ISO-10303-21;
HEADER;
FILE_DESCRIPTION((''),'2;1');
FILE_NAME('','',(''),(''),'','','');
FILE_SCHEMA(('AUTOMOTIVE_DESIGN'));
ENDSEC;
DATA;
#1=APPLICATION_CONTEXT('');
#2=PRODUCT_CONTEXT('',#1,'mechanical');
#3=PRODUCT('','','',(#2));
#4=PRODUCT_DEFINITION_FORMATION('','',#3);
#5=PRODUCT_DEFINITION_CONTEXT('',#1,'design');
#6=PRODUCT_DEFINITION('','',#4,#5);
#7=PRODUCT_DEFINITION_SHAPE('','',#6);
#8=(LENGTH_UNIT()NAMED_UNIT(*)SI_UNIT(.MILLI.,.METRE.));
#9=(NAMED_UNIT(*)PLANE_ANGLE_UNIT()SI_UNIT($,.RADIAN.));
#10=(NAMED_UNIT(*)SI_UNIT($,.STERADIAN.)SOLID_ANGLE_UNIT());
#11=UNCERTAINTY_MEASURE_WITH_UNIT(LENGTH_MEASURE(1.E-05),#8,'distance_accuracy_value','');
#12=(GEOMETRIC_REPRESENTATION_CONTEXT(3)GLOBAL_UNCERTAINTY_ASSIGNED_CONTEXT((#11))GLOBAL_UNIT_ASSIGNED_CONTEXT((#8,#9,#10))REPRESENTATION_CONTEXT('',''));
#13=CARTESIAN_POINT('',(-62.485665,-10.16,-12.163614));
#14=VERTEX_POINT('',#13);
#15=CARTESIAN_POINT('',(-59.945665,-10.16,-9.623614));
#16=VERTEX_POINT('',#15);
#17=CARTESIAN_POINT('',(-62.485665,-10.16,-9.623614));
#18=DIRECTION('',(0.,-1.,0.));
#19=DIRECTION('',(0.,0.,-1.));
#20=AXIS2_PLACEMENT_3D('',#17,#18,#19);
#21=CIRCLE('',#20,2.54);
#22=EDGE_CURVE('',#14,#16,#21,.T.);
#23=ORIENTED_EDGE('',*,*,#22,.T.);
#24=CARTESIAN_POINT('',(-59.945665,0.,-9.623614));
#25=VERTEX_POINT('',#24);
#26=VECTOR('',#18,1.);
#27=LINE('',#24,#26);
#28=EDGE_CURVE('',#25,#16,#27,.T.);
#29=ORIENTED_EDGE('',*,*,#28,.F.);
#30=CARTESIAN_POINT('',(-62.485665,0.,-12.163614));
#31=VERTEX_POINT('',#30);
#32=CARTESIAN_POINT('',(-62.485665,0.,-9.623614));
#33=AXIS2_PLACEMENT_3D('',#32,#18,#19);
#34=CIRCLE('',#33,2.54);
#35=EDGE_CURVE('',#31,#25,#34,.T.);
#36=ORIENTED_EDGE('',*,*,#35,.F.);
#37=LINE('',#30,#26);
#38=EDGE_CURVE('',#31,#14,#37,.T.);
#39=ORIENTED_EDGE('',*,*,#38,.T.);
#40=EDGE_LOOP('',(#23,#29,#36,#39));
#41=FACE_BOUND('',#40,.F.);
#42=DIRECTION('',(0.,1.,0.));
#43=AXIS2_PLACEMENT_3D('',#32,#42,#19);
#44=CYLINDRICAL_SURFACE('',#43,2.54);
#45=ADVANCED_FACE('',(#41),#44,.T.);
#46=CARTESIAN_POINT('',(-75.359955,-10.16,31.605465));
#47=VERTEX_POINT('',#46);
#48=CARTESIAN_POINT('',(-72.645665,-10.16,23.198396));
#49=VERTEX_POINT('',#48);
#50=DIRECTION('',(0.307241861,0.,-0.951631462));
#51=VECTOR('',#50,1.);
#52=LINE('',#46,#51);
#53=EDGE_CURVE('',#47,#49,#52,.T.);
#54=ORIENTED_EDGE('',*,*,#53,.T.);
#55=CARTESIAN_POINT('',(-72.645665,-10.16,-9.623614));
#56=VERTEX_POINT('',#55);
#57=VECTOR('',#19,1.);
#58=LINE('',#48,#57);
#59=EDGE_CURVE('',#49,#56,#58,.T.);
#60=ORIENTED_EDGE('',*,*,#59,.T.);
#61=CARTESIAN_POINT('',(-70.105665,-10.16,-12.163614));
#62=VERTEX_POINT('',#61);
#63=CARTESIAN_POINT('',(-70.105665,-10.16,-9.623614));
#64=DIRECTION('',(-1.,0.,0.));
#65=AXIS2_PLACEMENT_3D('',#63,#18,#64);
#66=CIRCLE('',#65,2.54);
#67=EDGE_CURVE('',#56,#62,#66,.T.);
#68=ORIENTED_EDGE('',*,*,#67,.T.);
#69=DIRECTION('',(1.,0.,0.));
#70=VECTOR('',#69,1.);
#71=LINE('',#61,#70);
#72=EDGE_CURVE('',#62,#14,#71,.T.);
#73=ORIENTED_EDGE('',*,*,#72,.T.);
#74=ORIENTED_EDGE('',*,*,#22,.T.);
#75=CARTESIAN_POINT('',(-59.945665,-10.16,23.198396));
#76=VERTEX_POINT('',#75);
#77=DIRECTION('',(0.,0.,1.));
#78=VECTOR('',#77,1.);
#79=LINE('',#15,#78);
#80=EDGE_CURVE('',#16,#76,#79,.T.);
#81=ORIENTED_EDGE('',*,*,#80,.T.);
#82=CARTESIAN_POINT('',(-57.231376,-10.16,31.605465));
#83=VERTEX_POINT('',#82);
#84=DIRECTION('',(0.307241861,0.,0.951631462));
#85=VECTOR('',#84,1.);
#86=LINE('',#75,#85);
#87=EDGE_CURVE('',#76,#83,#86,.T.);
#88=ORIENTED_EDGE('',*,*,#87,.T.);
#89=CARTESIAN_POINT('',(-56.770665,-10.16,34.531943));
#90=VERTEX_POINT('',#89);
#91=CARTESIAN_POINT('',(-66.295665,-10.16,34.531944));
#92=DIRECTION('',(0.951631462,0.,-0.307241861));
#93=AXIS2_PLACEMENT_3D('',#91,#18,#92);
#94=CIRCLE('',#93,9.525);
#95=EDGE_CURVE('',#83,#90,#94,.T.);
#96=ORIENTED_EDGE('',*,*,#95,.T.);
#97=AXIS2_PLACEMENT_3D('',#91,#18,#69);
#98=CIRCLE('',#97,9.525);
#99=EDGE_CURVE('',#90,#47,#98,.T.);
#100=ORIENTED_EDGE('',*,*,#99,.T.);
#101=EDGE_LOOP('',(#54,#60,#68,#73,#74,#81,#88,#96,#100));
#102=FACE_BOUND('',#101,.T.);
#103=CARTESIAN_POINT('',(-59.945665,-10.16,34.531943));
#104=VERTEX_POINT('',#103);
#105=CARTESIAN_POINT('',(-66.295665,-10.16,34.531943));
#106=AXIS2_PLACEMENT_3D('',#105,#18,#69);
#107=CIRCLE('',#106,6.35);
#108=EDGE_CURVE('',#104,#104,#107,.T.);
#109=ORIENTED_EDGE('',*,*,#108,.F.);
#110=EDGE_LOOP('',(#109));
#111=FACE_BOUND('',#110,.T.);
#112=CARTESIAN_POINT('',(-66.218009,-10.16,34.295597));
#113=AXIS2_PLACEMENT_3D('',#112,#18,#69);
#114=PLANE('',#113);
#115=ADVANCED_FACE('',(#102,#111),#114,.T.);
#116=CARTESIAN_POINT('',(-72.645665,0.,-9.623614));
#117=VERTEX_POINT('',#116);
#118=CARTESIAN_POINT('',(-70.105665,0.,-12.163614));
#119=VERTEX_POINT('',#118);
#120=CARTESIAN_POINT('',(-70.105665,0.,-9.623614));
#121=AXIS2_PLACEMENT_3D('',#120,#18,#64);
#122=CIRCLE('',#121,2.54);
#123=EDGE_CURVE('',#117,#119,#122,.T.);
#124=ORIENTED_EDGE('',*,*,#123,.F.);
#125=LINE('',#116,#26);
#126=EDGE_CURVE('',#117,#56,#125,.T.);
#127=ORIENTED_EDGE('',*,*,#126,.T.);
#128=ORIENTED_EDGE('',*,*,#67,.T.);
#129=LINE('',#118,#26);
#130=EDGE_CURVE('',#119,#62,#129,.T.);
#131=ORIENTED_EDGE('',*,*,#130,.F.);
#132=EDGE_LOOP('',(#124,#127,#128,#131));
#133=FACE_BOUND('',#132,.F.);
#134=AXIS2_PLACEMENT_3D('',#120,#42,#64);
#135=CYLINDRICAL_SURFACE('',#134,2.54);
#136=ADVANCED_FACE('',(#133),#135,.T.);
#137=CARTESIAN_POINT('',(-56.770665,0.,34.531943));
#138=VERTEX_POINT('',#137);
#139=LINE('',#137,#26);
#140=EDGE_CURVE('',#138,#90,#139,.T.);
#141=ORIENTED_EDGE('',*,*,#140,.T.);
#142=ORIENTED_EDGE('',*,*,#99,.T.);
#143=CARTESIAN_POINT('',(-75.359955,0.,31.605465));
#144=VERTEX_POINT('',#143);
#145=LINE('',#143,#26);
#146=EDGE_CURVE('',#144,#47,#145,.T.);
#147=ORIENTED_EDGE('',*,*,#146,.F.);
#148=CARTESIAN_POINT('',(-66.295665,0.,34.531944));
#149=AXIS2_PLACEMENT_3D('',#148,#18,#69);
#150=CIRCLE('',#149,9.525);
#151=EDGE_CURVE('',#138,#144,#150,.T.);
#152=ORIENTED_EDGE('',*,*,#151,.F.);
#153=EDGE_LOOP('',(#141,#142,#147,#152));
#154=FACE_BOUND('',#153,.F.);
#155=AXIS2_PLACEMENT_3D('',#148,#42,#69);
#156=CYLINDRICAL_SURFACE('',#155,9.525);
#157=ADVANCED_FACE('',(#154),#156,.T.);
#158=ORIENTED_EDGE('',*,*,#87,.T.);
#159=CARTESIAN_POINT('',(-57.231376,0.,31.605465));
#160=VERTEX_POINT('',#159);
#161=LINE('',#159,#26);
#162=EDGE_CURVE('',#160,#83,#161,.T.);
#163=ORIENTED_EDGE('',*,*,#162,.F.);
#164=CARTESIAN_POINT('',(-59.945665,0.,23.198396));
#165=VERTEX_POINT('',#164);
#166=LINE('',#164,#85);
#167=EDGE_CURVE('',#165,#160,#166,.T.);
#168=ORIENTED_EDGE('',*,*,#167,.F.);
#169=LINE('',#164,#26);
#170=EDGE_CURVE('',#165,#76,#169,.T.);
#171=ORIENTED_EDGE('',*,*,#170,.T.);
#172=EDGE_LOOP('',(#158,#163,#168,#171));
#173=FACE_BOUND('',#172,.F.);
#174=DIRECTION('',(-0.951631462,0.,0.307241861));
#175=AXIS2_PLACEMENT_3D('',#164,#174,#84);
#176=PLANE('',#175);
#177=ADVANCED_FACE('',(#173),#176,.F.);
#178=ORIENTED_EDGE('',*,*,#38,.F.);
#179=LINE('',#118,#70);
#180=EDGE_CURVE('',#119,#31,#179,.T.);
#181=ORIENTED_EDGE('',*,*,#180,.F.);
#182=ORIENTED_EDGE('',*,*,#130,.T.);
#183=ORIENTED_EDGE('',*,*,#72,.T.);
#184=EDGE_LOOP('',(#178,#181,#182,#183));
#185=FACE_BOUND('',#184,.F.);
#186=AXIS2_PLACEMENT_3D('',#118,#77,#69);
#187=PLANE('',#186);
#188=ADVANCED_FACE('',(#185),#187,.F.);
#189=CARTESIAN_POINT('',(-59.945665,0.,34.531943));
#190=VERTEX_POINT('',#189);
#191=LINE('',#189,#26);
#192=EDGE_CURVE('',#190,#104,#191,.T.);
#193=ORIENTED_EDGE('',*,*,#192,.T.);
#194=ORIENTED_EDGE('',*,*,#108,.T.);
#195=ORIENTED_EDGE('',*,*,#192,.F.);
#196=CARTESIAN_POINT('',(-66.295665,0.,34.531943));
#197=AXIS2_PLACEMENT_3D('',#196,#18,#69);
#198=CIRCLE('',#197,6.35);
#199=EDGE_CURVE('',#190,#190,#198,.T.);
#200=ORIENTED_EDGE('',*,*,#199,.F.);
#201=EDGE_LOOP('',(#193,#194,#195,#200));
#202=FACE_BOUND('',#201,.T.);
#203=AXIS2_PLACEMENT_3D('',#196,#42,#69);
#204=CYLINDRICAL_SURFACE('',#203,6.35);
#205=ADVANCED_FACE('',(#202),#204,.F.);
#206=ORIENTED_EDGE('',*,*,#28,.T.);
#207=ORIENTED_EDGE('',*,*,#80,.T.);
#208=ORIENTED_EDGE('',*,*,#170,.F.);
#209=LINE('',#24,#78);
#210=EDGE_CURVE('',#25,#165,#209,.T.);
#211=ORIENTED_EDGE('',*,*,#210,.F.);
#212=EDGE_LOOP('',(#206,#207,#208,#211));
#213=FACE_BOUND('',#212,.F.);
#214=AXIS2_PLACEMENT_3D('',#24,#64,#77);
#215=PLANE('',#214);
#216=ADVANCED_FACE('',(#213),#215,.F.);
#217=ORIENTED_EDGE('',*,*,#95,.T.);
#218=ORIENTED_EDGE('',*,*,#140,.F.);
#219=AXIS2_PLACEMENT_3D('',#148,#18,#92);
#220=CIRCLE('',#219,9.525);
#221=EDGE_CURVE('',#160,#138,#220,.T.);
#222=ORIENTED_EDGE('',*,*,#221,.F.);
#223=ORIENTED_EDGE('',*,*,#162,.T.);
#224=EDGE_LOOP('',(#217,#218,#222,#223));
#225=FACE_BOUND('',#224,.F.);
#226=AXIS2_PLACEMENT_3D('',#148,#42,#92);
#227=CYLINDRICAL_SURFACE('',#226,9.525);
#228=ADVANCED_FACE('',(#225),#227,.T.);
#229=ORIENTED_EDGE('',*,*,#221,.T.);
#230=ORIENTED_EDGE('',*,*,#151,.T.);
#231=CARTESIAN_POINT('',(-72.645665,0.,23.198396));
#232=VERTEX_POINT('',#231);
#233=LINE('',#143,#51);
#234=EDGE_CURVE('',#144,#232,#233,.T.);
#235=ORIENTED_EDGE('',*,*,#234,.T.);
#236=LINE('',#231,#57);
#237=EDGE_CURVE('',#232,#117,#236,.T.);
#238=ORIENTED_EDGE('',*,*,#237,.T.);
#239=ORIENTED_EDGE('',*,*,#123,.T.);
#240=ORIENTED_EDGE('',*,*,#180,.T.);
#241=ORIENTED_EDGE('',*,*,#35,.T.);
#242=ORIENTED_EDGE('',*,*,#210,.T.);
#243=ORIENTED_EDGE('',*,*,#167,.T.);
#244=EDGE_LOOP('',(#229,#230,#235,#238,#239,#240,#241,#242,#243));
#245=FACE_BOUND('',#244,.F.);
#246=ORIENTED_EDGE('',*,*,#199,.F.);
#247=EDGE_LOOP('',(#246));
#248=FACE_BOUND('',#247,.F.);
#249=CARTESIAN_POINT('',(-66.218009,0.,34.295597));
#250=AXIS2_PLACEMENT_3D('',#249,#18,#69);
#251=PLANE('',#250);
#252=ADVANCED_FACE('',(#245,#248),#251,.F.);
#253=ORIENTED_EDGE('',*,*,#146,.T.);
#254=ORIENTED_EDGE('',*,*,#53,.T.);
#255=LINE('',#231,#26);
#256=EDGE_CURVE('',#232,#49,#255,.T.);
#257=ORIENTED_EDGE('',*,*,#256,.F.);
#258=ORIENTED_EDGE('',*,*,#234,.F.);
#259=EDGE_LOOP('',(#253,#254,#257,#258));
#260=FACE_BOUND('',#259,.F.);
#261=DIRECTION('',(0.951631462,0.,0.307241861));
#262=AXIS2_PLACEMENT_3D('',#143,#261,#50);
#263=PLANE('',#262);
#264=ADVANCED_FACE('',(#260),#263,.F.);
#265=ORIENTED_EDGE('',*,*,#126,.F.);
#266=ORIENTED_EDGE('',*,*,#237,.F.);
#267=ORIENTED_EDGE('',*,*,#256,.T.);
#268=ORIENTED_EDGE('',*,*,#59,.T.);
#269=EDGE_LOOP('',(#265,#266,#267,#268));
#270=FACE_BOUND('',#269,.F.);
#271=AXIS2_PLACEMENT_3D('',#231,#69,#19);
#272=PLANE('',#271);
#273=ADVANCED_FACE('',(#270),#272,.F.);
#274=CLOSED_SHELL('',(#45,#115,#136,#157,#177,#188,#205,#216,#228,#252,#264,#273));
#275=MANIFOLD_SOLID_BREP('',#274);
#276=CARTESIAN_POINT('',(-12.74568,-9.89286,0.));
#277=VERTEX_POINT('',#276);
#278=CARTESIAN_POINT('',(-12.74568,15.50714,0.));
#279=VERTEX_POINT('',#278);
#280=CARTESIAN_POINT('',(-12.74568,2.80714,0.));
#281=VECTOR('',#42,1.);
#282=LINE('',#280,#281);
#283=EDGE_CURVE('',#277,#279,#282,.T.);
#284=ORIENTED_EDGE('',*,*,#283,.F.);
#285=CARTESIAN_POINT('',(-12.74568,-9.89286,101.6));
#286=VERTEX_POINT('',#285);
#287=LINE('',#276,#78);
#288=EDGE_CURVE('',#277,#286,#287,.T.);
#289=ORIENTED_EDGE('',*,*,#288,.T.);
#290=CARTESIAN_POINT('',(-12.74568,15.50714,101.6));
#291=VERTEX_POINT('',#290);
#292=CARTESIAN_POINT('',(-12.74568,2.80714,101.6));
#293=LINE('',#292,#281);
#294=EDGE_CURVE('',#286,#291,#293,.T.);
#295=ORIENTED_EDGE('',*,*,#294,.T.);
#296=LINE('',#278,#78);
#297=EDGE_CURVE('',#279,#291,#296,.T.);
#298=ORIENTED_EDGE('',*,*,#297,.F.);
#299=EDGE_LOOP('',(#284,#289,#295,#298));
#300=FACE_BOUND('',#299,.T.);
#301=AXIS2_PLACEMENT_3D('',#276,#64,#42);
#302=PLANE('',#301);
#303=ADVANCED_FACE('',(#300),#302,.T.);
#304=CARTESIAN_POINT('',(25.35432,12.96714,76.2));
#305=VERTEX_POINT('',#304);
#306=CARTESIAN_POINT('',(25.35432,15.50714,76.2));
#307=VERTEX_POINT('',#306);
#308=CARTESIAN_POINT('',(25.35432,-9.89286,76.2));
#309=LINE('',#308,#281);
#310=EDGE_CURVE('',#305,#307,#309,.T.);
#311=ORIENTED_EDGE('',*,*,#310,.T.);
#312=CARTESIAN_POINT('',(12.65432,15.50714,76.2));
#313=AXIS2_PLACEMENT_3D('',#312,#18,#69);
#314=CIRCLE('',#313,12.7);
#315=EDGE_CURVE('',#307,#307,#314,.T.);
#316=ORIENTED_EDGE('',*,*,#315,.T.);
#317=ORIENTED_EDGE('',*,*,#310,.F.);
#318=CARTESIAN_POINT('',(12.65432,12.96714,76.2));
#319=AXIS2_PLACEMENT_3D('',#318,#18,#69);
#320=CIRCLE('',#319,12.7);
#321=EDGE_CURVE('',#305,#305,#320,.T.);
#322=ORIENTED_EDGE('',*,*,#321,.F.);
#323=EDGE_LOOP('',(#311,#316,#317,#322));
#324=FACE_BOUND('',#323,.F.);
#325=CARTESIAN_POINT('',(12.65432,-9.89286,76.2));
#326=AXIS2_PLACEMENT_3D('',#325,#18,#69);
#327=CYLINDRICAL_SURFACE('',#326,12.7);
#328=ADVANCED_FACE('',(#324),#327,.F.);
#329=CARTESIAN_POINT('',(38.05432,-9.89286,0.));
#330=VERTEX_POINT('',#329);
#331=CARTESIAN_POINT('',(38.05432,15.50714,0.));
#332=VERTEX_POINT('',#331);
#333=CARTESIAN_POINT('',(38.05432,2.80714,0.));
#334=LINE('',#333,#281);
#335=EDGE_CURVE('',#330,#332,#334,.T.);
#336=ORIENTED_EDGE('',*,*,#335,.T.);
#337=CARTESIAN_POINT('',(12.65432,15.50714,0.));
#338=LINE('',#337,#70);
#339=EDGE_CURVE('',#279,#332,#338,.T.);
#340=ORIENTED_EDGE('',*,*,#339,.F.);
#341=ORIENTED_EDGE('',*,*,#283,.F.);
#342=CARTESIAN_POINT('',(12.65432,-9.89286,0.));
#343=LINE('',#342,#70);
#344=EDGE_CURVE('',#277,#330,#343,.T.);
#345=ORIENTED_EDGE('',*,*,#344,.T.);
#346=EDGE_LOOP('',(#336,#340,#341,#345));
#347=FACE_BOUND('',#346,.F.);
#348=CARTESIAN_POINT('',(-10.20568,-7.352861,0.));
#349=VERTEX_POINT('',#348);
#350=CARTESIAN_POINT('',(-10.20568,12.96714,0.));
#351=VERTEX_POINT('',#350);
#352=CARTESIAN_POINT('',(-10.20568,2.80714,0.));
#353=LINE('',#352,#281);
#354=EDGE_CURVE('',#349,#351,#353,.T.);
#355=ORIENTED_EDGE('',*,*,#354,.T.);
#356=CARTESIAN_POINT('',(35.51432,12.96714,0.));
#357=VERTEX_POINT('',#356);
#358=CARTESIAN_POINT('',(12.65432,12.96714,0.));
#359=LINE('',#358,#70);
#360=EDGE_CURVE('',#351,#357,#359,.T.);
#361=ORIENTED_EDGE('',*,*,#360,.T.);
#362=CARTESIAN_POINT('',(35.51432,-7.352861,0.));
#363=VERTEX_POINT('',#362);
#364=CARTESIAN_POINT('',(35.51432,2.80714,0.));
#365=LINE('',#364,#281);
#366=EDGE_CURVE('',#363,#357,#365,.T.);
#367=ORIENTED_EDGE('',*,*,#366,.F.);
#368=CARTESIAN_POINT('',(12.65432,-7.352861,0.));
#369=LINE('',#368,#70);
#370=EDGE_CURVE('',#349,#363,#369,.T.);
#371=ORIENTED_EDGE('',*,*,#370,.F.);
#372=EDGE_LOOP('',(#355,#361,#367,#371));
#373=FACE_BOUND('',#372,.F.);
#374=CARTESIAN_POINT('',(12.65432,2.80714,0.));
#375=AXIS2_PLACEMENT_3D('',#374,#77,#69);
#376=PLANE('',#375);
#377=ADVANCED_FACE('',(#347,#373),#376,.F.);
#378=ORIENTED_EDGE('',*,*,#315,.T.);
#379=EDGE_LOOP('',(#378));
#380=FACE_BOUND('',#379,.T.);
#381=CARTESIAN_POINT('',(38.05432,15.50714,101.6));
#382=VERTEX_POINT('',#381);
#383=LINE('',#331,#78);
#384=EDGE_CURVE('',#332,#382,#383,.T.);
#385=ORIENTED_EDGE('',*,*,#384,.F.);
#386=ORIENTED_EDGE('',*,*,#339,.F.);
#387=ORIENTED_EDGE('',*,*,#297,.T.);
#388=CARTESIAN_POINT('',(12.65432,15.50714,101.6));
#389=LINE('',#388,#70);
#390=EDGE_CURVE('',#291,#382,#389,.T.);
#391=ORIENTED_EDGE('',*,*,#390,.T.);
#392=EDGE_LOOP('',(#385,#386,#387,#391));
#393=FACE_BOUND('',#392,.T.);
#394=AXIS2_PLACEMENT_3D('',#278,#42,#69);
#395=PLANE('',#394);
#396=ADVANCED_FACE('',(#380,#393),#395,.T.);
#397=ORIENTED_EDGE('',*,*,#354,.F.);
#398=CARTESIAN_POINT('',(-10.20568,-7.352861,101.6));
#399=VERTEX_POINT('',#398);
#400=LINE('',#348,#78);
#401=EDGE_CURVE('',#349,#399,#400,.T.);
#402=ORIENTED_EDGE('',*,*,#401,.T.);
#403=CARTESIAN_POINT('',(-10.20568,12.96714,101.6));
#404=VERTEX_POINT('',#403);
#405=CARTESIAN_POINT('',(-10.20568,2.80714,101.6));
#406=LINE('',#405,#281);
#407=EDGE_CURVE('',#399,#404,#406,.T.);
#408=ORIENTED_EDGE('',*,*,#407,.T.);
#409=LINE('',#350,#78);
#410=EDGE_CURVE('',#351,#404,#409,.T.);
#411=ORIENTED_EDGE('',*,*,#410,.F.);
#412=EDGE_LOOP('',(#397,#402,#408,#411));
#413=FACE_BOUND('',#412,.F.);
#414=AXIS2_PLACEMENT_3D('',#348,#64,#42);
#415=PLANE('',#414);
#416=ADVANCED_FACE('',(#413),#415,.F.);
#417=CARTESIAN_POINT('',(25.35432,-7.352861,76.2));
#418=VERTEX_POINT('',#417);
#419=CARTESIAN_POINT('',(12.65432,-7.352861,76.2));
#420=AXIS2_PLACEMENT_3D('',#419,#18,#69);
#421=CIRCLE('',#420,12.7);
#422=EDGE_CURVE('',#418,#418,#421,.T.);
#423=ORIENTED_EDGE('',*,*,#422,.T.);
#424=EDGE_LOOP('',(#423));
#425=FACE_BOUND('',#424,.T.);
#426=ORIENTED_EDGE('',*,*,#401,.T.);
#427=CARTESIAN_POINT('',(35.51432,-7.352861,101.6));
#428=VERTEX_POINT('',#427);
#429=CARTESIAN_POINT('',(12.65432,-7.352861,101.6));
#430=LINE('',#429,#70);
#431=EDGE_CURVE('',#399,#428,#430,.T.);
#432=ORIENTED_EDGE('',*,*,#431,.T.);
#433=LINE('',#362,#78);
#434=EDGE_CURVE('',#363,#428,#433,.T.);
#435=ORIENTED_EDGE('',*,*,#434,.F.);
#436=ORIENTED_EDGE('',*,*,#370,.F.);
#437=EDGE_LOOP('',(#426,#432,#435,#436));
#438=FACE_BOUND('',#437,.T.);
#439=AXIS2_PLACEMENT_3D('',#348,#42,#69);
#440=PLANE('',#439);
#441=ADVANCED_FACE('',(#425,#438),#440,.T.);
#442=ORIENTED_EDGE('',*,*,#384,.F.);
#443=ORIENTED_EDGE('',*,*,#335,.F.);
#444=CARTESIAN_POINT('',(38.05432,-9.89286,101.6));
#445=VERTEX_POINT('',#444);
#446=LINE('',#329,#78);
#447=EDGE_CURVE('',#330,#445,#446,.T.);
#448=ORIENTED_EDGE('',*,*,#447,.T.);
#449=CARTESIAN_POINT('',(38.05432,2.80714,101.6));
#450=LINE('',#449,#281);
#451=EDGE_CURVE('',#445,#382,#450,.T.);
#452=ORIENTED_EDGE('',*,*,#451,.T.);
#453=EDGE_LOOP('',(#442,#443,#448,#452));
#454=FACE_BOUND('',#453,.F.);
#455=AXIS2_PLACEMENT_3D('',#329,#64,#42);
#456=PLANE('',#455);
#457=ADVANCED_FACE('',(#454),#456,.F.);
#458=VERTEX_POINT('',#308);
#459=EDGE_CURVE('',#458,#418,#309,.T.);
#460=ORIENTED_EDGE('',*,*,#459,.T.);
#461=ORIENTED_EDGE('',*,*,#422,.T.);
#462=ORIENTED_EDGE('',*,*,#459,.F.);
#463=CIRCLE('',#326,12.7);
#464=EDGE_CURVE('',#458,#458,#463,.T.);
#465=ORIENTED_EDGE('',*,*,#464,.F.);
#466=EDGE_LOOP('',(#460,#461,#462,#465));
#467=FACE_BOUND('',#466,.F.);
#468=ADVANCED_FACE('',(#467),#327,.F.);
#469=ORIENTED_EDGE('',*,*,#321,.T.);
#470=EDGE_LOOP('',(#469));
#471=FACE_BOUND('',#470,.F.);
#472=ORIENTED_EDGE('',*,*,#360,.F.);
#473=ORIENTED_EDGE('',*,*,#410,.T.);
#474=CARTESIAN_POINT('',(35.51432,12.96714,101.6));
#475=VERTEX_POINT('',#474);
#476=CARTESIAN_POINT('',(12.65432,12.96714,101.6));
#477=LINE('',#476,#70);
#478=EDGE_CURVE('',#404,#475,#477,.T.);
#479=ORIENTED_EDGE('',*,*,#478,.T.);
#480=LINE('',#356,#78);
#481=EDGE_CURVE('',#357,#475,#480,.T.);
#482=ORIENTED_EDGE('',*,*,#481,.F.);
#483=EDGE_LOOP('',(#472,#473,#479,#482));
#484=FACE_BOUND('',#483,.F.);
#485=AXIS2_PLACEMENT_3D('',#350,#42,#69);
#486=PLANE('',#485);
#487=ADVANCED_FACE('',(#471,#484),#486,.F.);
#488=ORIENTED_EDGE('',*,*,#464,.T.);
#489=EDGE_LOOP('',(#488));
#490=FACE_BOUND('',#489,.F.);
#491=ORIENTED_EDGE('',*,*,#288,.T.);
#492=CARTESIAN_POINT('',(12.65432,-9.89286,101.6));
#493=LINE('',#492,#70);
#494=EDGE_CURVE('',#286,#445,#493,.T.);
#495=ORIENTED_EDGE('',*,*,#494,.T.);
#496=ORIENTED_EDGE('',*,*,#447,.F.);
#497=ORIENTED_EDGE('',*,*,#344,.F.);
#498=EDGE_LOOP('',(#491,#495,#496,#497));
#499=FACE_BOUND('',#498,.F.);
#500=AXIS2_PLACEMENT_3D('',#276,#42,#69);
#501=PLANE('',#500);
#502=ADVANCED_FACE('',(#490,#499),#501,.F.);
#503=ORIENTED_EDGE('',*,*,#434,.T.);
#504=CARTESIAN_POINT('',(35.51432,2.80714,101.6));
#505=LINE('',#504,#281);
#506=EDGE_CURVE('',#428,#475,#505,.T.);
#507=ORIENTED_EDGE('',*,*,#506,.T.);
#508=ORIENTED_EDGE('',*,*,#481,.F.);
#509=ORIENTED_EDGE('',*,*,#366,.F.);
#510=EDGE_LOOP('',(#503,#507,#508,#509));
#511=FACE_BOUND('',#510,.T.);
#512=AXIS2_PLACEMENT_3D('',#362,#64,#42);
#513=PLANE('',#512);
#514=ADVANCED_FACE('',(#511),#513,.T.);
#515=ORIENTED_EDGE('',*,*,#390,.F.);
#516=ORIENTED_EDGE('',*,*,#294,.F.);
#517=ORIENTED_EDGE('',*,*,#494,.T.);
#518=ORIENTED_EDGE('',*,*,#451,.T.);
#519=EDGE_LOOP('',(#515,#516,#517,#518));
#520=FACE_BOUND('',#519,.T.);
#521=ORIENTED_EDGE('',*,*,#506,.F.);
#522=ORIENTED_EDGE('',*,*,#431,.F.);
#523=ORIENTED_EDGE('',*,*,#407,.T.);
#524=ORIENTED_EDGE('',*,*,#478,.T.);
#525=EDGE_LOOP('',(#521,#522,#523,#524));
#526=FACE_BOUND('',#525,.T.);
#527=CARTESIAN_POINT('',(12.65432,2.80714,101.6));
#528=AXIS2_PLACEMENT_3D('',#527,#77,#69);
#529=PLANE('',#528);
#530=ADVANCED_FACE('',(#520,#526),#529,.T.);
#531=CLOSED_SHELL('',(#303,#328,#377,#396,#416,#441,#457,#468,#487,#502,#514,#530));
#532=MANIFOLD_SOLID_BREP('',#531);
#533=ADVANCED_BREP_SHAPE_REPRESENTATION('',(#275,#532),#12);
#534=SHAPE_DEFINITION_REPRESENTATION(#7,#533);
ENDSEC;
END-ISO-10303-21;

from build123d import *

# Parameters (mm, degrees)
F1_W     = 50.8
F1_H     = 25.4
F1_W_2   = 45.72
F1_H_2   = 20.3200011688
F2_DEPTH = 101.6
F3_R     = 12.7
F4_DEPTH = 25.4
F5_R     = 6.35
F6_DEPTH = 10.16


# Not quite as in the source:
# - a variable given as a bare number and used for a length is read in inches; the dataset says mm whatever the document's units were


with BuildPart() as f2:
    # F1 (on Top) → F2 (new body)
    with BuildSketch(Plane.XY):
        with Locations((12.6543196693, 2.8071403882)):
            Rectangle(F1_W, F1_H)
        with Locations((12.6543196693, 2.8071398037)):
            Rectangle(F1_W_2, F1_H_2, mode=Mode.SUBTRACT)
    extrude(amount=F2_DEPTH)

    # F3 (on face) → F4 (cut, through all)
    with BuildSketch(Plane.XZ.offset(9.8928596118)):
        with Locations((12.6543196693, 76.2)):
            Circle(F3_R)
    extrude(amount=-F4_DEPTH, mode=Mode.SUBTRACT)


with BuildPart() as f6:
    # F5 (on Front) → F6 (new body)
    with BuildSketch(Plane.XZ):
        with BuildLine():
            ThreePointArc((-56.7706652855, 34.5319435), (-67.7769258766, 43.9410609965), (-75.3599549571, 31.6054647715))
            ThreePointArc((-75.3599549571, 31.6054647715), (-66.2956652855, 25.0069435), (-57.2313756138, 31.6054647715))
            ThreePointArc((-57.2313756138, 31.6054647715), (-56.8865477891, 33.0506829089), (-56.7706652855, 34.5319435))
        make_face()
        with Locations((-66.2956652855, 34.5319435)):
            Circle(F5_R, mode=Mode.SUBTRACT)
        with BuildLine():
            Line((-75.3599549571, 31.6054647715), (-72.6456652855, 23.1983960315))
            Line((-72.6456652855, 23.1983960315), (-72.6456652855, -9.6236144723))
            ThreePointArc((-72.6456652855, -9.6236144723), (-71.9017165097, -11.4196656965), (-70.1056652855, -12.1636144723))
            Line((-70.1056652855, -12.1636144723), (-62.4856652855, -12.1636144723))
            ThreePointArc((-62.4856652855, -12.1636144723), (-60.6896140613, -11.4196656965), (-59.9456652855, -9.6236144723))
            Line((-59.9456652855, -9.6236144723), (-59.9456652855, 23.1983960315))
            Line((-59.9456652855, 23.1983960315), (-57.2313756138, 31.6054647715))
            ThreePointArc((-57.2313756138, 31.6054647715), (-66.2956652855, 25.0069435), (-75.3599549571, 31.6054647715))
        make_face()
    extrude(amount=F6_DEPTH)


solid = Compound([f2.part, f6.part])
